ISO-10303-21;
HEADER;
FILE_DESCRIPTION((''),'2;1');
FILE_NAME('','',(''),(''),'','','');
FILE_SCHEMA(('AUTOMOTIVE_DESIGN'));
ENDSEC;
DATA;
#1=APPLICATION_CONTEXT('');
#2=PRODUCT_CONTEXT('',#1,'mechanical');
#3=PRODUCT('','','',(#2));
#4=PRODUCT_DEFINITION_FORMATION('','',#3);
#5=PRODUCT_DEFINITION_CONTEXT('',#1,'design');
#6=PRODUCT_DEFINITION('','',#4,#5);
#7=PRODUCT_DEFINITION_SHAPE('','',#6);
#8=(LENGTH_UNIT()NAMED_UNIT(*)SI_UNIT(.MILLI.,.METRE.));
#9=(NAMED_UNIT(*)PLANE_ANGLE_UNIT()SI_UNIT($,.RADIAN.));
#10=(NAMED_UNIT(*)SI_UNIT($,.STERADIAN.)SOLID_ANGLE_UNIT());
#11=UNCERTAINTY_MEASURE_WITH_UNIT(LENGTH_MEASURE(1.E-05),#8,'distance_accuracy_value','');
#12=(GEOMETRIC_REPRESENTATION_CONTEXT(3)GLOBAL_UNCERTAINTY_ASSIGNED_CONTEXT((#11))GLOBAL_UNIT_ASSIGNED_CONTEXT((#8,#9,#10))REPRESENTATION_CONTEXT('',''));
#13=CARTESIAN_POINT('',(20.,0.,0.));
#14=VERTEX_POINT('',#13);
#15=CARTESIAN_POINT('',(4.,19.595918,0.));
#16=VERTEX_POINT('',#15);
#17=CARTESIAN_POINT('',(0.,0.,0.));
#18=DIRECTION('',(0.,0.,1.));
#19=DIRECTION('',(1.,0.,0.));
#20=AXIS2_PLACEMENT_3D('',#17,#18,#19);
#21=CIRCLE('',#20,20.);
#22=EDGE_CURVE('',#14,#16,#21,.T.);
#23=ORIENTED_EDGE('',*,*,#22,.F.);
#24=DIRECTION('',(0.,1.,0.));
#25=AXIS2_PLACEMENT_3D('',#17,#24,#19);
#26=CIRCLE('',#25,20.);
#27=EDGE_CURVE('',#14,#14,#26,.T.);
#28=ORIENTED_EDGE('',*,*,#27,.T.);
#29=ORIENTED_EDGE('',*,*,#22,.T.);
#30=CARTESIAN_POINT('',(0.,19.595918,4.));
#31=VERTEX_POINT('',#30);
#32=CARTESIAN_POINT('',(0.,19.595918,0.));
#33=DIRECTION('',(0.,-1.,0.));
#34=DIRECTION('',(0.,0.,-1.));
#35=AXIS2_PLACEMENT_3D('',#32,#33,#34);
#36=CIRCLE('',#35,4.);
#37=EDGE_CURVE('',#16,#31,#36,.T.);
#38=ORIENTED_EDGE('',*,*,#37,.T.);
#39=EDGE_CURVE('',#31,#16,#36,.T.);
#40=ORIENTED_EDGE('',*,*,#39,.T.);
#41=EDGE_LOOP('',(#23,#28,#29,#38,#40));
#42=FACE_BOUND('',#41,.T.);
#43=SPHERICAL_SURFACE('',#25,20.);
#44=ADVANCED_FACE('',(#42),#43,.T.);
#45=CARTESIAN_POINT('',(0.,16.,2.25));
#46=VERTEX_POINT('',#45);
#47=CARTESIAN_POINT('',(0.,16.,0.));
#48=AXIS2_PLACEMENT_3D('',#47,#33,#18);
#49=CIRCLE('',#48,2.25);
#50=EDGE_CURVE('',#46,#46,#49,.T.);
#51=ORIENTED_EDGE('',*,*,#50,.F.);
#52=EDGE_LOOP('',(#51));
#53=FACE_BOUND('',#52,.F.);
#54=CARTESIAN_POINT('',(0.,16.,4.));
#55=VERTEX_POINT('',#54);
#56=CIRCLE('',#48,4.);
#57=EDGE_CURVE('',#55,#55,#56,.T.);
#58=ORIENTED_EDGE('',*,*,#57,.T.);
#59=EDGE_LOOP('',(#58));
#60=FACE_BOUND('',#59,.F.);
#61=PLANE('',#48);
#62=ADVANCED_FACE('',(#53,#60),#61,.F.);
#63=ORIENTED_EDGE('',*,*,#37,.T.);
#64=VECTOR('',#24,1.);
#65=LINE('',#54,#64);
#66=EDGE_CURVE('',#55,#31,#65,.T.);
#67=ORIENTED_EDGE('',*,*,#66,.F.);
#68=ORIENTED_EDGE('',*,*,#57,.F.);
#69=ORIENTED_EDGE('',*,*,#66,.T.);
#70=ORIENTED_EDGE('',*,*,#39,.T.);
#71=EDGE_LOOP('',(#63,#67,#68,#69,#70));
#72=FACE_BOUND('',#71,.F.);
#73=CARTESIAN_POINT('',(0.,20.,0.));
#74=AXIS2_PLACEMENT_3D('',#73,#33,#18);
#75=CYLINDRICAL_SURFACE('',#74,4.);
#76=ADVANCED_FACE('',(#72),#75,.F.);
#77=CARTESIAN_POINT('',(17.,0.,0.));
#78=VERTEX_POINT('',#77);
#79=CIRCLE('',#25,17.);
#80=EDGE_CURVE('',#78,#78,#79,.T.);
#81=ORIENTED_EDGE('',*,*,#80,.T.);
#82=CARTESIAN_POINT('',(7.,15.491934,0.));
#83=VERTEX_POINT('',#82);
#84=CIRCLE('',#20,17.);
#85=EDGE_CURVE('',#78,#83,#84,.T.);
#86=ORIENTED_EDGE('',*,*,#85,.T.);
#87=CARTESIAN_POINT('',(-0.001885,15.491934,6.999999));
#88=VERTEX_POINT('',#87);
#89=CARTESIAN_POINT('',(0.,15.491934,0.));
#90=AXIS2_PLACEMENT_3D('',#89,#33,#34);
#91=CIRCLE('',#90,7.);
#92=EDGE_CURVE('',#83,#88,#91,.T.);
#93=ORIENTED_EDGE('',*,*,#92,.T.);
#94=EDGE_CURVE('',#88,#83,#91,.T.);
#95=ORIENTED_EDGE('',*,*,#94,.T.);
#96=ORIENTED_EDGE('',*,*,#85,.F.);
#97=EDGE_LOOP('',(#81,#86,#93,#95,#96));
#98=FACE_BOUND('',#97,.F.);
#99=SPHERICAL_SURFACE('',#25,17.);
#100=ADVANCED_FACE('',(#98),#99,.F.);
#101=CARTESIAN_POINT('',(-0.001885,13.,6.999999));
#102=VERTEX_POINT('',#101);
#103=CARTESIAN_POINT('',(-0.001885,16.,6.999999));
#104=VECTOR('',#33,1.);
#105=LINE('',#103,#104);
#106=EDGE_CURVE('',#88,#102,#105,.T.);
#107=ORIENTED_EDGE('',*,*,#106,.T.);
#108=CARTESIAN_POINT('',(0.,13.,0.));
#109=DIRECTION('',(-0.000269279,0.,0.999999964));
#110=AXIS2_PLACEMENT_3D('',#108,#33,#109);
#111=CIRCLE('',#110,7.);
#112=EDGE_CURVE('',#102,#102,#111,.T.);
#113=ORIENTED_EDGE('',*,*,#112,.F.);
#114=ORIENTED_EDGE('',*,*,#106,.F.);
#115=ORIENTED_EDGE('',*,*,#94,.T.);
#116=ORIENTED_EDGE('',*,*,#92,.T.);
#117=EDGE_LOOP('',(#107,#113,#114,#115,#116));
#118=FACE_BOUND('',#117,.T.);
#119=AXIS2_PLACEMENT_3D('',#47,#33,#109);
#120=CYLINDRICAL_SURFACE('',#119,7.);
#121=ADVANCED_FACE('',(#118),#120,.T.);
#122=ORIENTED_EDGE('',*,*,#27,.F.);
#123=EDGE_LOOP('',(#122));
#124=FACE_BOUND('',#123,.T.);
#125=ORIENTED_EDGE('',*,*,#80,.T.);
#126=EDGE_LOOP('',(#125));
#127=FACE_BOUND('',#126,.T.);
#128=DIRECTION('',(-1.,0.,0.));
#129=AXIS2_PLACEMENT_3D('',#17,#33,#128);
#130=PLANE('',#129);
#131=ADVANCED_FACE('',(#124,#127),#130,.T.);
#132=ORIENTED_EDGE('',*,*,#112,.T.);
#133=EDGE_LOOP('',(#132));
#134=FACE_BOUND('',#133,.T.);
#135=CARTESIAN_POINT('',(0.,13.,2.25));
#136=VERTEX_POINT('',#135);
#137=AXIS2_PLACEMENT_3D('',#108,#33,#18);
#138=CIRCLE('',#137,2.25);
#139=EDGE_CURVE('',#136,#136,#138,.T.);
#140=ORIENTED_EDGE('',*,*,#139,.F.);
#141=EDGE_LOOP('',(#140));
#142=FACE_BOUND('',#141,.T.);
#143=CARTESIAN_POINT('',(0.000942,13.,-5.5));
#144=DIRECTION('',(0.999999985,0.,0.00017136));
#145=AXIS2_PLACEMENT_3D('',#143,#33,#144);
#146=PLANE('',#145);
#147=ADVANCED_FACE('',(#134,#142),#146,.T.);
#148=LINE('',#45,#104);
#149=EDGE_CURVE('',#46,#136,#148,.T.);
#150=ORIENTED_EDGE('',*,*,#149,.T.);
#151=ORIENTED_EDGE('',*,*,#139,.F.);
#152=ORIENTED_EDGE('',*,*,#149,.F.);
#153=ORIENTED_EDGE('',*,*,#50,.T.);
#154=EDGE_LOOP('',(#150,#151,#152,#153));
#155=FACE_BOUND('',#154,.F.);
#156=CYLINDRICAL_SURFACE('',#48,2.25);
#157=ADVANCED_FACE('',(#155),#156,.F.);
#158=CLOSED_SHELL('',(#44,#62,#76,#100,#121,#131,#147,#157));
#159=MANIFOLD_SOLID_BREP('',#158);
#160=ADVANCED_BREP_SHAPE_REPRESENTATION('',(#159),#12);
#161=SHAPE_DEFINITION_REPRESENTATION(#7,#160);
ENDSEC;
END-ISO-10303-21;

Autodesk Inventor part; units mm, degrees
ref_plane "YZ Plane" through (0, 0, 0) normal (1, 0, 0) x (0, 1, 0)
ref_plane "XY Plane" through (0, 0, 0) normal (0, 0, 1) x (1, 0, 0)
sketch "Sketch1" plane through (0, 0, 0) normal (0, 0, 1) x (1, 0, 0)
  line L0 (0, 0) -> (0, 20)
  line L1 (0, 0) -> (20, 0)
  arc A0 (20, 0) -> (0, 20) centre (0, 0) ccw
  line L2 (0, -4.8284) -> (0, 28.9706) projected
  dimension "d2" = 20
revolve "Revolution1" add sketch "Sketch1" angle 360 about axis through (0, -10, 0) along (0, 1, 0)
ref_plane "Work Plane1" through (0, 20, 0) normal (0, 1, 0) x (-1, 0, 0)
sketch "Sketch2" plane through (0, 20, 0) normal (0, 1, 0) x (-1, 0, 0)
  point P0 (0, 0)
  point P1 (0, 0)
hole "Hole1" at (0, 20, 0) direction (0, -1, 0) diameter 4.5 end through all counterbore diameter 8 counterbore depth 4 clearance for "Socket Head Cap Screw" size "M4" standard "Ansi Metric M Profile"
shell "Shell1" thickness 3 removed faces 1 at (13.8841, 0, 1.6858)
sketch "Sketch3" plane through (0, 0, 0) normal (0, -1, 0) x (1, 0, 0)
  circle A0 centre (0, 0) radius 5.25 projected
  circle A1 centre (0, 0) radius 2.25 projected
extrude "Extrusion1" cut sketch "Sketch3" against normal up to surface (13 mm away)
properties part number "Ball_Upper Half" material "Nylon 6/6"
